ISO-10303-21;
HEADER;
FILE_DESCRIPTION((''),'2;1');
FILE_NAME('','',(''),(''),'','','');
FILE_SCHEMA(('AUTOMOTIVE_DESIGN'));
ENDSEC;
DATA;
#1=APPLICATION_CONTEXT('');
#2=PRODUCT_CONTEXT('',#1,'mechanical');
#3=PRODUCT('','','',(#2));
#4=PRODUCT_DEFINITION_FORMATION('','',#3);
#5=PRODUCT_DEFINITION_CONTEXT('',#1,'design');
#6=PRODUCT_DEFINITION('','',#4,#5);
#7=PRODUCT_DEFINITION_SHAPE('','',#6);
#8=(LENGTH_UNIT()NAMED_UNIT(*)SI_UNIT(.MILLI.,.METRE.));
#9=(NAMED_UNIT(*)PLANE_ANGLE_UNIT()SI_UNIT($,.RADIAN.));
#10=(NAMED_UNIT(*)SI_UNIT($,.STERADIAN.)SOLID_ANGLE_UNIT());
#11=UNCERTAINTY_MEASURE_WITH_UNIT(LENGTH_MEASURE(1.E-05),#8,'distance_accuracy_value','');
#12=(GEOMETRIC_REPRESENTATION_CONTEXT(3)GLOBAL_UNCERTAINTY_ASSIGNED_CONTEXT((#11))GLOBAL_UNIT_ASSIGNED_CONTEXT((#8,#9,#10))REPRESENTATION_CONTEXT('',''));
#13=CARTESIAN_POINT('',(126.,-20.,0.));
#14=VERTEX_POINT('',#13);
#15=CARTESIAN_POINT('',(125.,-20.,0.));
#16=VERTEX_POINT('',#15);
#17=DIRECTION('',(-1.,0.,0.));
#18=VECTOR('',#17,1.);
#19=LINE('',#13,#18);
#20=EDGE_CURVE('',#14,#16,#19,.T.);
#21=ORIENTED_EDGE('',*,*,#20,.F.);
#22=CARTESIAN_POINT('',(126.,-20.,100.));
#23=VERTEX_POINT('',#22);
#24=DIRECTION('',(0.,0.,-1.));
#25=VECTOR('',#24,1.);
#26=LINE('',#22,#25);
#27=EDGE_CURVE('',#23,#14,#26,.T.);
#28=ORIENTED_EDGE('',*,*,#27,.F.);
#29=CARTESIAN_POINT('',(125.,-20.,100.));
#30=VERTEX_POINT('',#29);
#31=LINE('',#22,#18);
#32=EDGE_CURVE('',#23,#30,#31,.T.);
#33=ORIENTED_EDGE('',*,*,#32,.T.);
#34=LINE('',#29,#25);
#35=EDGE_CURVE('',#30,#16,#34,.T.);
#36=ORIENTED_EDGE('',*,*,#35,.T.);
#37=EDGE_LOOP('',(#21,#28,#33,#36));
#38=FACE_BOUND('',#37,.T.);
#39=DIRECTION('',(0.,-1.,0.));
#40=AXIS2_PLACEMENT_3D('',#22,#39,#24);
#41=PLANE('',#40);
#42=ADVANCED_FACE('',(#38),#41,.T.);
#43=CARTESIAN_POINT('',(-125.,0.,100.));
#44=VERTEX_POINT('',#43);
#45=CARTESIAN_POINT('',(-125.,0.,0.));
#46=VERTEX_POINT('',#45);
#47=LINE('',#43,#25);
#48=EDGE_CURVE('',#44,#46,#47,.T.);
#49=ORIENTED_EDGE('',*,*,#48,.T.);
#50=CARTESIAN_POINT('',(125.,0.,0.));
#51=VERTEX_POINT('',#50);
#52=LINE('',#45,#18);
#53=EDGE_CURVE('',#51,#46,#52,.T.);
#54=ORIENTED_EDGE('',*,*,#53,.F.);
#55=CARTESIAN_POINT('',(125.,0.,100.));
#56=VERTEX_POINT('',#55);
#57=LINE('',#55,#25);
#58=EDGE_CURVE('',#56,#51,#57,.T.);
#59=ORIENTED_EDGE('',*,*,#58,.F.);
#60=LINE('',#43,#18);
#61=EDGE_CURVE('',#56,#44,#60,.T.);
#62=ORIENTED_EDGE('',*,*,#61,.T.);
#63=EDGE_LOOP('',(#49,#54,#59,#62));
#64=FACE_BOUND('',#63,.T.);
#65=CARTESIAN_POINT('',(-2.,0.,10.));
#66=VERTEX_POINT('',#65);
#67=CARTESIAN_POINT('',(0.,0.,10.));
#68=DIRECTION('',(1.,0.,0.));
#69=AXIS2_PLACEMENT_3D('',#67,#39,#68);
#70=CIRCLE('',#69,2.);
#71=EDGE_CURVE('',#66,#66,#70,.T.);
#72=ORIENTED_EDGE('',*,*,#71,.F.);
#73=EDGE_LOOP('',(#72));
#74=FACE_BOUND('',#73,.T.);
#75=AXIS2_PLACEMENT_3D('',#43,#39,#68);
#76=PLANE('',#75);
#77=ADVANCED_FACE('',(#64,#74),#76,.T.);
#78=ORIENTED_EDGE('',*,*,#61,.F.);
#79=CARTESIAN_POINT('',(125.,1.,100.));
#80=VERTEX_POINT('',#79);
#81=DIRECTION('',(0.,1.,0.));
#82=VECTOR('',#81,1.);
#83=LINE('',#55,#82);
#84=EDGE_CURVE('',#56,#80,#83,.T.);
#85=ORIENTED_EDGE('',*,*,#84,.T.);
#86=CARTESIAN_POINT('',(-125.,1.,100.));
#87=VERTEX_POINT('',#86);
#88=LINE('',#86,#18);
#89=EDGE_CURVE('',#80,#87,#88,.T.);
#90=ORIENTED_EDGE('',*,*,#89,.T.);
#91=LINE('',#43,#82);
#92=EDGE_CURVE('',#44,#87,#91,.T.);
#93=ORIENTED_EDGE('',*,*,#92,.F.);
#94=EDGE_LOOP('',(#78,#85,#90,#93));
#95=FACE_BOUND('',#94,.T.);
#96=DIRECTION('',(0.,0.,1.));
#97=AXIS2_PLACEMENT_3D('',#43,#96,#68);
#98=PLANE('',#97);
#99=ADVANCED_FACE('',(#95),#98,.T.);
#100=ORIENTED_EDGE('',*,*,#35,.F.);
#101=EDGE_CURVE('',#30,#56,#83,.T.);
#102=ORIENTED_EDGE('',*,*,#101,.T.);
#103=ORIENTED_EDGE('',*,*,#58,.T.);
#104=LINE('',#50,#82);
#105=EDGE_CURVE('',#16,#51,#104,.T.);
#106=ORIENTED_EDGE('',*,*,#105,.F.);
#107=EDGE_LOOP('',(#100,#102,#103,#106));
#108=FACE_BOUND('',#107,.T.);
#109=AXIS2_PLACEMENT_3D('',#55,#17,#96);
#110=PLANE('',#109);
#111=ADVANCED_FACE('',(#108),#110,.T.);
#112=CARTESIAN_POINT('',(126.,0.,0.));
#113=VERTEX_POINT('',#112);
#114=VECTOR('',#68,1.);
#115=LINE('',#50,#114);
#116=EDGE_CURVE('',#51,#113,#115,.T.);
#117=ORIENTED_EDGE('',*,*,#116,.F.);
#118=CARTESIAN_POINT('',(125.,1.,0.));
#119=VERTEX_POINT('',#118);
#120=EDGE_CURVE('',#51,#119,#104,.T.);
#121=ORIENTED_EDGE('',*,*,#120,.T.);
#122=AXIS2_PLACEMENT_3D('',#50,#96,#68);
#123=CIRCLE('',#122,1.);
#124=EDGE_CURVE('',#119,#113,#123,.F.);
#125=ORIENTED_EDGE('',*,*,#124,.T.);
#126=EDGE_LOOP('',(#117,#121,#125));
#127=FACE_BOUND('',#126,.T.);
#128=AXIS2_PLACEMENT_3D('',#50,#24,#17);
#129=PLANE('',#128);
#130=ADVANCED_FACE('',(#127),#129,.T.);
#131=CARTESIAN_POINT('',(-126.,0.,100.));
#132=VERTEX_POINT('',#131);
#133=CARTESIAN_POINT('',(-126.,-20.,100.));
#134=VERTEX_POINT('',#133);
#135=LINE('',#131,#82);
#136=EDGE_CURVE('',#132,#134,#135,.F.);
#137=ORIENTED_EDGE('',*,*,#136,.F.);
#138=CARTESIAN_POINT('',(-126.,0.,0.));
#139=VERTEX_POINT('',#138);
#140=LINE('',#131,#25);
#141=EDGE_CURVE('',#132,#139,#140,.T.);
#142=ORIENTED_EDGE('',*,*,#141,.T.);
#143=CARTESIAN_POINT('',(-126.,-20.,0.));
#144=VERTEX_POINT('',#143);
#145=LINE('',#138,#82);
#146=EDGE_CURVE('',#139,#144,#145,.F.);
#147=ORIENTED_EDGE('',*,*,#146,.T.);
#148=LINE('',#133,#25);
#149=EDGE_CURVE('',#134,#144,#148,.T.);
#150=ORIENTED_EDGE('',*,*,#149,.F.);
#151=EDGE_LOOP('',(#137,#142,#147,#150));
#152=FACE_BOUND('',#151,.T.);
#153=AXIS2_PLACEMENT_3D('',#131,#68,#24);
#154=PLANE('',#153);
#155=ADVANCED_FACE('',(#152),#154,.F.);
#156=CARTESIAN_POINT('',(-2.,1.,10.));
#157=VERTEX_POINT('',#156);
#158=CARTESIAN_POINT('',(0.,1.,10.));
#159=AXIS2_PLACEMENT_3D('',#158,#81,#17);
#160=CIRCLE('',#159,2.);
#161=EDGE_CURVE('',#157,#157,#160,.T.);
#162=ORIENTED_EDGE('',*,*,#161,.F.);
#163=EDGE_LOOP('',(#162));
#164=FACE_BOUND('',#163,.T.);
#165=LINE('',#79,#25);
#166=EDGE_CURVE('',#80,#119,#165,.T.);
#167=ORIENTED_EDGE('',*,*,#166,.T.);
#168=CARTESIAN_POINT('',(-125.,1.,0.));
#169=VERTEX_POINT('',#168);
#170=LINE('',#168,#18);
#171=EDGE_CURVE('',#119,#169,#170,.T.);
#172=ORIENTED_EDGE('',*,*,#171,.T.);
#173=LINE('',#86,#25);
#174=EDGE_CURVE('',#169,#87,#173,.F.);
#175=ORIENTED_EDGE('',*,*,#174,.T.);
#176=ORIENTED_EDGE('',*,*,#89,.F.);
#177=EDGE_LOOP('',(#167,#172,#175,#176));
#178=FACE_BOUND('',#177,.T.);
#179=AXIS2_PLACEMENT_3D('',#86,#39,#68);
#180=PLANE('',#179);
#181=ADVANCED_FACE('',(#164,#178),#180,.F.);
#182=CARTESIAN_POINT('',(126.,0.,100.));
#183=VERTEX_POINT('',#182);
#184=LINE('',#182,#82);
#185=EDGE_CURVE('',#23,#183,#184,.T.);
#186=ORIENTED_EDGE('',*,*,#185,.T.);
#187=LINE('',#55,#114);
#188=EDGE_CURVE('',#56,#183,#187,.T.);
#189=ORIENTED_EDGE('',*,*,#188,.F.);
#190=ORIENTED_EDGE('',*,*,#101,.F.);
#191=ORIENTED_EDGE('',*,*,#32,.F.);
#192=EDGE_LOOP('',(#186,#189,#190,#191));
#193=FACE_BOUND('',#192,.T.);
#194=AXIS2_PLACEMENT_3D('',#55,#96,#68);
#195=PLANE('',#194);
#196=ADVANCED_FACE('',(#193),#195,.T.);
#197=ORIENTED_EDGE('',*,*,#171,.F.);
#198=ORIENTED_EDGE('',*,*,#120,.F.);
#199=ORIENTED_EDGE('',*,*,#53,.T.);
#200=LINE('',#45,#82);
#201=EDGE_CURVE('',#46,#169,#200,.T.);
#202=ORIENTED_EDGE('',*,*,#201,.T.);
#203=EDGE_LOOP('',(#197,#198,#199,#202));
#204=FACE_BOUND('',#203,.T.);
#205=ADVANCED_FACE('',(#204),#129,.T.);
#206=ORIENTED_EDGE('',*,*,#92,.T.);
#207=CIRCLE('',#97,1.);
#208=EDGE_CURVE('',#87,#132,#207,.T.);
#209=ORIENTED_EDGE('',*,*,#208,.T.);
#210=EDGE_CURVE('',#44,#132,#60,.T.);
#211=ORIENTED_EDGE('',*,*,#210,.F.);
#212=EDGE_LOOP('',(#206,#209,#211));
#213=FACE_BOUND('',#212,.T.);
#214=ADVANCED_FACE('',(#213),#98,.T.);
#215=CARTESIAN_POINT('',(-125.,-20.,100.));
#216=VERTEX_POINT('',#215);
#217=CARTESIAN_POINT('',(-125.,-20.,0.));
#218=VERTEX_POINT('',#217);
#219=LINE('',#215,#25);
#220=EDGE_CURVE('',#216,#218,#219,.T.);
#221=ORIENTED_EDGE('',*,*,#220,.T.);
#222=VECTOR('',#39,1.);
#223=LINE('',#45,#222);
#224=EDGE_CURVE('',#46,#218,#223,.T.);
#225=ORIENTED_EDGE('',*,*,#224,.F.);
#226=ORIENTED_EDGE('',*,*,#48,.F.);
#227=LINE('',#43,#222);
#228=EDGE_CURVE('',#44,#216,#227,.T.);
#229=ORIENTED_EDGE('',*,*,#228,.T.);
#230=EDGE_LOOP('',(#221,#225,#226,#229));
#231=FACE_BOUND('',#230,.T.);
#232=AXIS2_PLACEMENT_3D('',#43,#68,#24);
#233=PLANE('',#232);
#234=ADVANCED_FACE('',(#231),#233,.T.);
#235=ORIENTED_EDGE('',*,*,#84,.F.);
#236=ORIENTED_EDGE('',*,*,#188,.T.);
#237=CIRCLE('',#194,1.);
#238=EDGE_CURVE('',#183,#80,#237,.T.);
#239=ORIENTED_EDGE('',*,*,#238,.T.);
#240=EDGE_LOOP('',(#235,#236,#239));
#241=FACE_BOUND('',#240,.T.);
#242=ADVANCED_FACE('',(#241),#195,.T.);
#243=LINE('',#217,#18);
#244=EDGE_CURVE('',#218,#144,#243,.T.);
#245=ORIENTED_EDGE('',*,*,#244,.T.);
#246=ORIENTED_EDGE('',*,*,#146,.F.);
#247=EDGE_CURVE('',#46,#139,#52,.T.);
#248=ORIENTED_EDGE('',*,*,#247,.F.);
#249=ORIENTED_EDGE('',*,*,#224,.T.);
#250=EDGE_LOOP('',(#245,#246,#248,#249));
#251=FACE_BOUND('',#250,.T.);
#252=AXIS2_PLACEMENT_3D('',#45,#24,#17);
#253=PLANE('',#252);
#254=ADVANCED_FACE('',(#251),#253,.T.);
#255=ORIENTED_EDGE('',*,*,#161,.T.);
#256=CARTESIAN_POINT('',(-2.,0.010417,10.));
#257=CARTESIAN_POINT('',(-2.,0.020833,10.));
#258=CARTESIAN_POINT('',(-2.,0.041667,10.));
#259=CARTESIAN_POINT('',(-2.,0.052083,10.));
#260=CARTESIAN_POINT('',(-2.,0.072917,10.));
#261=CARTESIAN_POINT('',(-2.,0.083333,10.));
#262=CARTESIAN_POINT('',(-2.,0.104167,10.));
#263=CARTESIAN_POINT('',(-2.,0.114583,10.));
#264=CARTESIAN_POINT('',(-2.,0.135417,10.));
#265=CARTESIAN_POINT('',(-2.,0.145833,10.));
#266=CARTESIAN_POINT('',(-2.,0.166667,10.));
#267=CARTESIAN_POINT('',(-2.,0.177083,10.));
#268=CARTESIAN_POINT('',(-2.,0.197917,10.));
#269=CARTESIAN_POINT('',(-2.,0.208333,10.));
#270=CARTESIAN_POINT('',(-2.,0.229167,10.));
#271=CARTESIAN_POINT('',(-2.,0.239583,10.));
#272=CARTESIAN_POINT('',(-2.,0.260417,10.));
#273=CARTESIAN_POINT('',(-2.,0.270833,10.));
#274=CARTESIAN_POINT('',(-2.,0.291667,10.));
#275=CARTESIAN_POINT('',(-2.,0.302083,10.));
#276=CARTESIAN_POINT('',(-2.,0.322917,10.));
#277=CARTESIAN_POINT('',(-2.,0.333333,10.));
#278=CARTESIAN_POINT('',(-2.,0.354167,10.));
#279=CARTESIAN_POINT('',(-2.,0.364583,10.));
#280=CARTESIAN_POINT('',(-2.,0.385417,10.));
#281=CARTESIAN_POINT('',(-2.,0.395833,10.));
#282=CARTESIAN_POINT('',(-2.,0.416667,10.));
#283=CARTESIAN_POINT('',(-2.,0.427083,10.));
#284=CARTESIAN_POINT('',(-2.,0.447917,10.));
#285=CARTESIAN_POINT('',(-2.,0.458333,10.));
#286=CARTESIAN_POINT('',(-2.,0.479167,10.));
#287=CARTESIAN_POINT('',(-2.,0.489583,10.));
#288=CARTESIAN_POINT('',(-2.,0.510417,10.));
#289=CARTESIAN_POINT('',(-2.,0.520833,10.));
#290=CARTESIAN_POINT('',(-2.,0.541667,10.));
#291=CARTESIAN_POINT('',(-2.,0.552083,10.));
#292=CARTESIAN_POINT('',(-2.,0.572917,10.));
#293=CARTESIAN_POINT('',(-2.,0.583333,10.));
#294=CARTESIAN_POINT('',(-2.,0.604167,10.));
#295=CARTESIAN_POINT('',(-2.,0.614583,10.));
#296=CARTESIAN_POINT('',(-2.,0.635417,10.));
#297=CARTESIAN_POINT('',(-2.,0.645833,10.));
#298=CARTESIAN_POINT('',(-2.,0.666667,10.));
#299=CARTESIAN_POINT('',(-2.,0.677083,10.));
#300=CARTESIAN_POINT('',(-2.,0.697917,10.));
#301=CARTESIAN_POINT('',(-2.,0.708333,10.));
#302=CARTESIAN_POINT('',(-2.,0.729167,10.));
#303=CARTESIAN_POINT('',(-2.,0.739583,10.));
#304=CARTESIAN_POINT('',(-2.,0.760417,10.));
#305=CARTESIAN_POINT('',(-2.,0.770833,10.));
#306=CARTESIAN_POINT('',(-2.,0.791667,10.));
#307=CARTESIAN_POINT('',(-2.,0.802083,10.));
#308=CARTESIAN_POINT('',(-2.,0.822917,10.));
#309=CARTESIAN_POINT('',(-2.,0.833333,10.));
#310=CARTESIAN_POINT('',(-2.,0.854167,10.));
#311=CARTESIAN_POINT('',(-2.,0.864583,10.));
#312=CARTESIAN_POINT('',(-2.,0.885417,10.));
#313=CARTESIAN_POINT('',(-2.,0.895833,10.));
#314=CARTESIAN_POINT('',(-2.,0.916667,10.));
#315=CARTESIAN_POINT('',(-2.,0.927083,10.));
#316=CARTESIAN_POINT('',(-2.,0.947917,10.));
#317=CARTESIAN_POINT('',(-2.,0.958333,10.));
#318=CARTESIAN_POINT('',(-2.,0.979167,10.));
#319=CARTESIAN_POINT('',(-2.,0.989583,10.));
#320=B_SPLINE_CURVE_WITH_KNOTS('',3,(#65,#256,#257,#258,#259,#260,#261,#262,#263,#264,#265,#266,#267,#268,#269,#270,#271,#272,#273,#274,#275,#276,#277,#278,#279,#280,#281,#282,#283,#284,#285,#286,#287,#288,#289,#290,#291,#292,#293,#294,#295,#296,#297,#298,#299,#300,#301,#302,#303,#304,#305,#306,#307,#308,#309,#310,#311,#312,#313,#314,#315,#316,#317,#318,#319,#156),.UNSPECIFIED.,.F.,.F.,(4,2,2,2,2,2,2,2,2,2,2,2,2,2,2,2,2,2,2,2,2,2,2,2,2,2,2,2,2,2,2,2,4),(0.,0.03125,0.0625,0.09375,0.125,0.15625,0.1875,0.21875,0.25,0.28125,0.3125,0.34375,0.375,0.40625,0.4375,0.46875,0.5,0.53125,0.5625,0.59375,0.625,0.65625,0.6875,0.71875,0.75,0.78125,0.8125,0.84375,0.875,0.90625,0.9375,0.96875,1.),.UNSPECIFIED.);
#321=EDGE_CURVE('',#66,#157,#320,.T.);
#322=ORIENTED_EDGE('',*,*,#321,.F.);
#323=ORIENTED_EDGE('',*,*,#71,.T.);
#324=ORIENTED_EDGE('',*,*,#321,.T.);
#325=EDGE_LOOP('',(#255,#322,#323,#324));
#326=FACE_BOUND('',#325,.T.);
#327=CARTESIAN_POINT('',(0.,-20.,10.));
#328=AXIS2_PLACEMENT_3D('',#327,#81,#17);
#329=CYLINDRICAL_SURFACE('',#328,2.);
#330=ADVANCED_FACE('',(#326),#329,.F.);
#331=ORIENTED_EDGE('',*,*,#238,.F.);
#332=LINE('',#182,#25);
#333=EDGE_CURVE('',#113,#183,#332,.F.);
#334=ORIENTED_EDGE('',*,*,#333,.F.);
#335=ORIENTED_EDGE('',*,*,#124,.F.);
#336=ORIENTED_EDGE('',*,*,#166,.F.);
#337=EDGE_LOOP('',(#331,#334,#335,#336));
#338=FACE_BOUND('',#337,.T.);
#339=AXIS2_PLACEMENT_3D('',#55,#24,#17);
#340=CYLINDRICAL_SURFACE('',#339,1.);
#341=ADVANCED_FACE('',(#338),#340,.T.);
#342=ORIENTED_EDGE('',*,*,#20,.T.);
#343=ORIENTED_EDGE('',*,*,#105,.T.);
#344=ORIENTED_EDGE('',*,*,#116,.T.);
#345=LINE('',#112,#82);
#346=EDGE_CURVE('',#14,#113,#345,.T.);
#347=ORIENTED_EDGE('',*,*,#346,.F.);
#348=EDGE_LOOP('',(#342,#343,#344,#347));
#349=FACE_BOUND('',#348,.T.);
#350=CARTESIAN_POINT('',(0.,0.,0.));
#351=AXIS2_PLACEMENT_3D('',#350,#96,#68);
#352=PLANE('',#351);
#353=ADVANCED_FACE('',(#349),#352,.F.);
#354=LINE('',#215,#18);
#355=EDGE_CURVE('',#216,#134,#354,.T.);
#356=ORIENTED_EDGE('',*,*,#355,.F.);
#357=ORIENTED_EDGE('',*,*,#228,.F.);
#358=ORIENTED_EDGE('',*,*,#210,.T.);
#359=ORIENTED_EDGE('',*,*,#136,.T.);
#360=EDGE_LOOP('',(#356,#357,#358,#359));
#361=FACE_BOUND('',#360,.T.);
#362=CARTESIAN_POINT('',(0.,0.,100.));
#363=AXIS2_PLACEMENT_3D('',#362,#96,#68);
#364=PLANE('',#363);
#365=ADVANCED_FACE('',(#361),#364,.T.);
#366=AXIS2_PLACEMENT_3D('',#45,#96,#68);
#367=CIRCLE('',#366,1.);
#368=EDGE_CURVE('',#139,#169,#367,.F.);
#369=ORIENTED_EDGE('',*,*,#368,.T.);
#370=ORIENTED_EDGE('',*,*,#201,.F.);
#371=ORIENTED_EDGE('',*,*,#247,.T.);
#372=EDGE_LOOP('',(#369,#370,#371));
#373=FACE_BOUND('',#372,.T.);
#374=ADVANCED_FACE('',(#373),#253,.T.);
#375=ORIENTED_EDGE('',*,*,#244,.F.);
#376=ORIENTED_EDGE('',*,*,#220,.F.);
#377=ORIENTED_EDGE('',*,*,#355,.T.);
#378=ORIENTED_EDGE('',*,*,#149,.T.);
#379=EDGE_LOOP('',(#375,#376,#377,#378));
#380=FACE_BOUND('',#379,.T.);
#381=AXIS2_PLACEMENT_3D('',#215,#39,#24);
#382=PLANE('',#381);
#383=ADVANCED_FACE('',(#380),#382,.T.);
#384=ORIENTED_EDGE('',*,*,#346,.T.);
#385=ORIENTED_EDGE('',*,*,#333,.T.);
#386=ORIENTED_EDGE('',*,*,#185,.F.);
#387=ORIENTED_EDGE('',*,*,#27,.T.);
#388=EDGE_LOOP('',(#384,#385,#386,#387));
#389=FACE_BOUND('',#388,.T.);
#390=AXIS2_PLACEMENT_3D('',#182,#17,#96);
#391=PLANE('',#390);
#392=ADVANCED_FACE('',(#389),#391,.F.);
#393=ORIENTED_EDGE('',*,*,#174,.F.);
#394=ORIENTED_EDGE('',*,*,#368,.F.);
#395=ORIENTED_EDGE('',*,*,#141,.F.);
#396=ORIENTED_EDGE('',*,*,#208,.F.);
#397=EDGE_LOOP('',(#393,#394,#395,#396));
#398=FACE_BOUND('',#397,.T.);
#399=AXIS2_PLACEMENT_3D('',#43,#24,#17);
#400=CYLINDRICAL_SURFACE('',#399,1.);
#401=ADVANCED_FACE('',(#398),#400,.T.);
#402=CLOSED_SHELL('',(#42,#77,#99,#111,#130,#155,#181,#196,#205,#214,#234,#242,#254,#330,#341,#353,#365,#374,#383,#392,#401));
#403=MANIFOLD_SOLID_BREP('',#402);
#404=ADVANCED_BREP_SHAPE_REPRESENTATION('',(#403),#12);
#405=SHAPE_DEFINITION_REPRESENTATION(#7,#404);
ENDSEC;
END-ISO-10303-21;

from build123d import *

# Parameters (mm, degrees)
T_LE_DE_BASE_PLI_E1_DEPTH = 100
ESQUISSE6_R               = 2
ENL_V_MAT_EXTRU_1_DEPTH   = 163.225152181


# Read off the part's stored shape, not the designer's step: Tôle de base pliée1
with BuildPart() as part:
    # Tôle de base pliée1 outline → Tôle de base pliée1 (new body)
    with BuildSketch(Plane.XY):
        with BuildLine():
            Line((-126, 0), (-126, -20))
            Line((-126, -20), (-125, -20))
            Line((-125, -20), (-125, 0))
            Line((-125, 0), (125, 0))
            Line((125, 0), (125, -20))
            Line((125, -20), (126, -20))
            Line((126, -20), (126, 0))
            ThreePointArc((126, 0), (125.707106781, 0.707106781), (125, 1))
            Line((125, 1), (-125, 1))
            ThreePointArc((-125, 1), (-125.707106781, 0.707106781), (-126, 0))
        make_face()
    extrude(amount=T_LE_DE_BASE_PLI_E1_DEPTH)

    # Esquisse6 → Enlèv. mat.-Extru.1 (cut, through all)
    with BuildSketch(Plane(origin=(0, 1, 0), x_dir=(1, 0, 0), z_dir=(0, 1, 0))):
        with Locations(Location((0, -10, 0), (0, 0, 180))):
            Circle(ESQUISSE6_R)
    extrude(amount=-ENL_V_MAT_EXTRU_1_DEPTH, mode=Mode.SUBTRACT)


solid = part.part
